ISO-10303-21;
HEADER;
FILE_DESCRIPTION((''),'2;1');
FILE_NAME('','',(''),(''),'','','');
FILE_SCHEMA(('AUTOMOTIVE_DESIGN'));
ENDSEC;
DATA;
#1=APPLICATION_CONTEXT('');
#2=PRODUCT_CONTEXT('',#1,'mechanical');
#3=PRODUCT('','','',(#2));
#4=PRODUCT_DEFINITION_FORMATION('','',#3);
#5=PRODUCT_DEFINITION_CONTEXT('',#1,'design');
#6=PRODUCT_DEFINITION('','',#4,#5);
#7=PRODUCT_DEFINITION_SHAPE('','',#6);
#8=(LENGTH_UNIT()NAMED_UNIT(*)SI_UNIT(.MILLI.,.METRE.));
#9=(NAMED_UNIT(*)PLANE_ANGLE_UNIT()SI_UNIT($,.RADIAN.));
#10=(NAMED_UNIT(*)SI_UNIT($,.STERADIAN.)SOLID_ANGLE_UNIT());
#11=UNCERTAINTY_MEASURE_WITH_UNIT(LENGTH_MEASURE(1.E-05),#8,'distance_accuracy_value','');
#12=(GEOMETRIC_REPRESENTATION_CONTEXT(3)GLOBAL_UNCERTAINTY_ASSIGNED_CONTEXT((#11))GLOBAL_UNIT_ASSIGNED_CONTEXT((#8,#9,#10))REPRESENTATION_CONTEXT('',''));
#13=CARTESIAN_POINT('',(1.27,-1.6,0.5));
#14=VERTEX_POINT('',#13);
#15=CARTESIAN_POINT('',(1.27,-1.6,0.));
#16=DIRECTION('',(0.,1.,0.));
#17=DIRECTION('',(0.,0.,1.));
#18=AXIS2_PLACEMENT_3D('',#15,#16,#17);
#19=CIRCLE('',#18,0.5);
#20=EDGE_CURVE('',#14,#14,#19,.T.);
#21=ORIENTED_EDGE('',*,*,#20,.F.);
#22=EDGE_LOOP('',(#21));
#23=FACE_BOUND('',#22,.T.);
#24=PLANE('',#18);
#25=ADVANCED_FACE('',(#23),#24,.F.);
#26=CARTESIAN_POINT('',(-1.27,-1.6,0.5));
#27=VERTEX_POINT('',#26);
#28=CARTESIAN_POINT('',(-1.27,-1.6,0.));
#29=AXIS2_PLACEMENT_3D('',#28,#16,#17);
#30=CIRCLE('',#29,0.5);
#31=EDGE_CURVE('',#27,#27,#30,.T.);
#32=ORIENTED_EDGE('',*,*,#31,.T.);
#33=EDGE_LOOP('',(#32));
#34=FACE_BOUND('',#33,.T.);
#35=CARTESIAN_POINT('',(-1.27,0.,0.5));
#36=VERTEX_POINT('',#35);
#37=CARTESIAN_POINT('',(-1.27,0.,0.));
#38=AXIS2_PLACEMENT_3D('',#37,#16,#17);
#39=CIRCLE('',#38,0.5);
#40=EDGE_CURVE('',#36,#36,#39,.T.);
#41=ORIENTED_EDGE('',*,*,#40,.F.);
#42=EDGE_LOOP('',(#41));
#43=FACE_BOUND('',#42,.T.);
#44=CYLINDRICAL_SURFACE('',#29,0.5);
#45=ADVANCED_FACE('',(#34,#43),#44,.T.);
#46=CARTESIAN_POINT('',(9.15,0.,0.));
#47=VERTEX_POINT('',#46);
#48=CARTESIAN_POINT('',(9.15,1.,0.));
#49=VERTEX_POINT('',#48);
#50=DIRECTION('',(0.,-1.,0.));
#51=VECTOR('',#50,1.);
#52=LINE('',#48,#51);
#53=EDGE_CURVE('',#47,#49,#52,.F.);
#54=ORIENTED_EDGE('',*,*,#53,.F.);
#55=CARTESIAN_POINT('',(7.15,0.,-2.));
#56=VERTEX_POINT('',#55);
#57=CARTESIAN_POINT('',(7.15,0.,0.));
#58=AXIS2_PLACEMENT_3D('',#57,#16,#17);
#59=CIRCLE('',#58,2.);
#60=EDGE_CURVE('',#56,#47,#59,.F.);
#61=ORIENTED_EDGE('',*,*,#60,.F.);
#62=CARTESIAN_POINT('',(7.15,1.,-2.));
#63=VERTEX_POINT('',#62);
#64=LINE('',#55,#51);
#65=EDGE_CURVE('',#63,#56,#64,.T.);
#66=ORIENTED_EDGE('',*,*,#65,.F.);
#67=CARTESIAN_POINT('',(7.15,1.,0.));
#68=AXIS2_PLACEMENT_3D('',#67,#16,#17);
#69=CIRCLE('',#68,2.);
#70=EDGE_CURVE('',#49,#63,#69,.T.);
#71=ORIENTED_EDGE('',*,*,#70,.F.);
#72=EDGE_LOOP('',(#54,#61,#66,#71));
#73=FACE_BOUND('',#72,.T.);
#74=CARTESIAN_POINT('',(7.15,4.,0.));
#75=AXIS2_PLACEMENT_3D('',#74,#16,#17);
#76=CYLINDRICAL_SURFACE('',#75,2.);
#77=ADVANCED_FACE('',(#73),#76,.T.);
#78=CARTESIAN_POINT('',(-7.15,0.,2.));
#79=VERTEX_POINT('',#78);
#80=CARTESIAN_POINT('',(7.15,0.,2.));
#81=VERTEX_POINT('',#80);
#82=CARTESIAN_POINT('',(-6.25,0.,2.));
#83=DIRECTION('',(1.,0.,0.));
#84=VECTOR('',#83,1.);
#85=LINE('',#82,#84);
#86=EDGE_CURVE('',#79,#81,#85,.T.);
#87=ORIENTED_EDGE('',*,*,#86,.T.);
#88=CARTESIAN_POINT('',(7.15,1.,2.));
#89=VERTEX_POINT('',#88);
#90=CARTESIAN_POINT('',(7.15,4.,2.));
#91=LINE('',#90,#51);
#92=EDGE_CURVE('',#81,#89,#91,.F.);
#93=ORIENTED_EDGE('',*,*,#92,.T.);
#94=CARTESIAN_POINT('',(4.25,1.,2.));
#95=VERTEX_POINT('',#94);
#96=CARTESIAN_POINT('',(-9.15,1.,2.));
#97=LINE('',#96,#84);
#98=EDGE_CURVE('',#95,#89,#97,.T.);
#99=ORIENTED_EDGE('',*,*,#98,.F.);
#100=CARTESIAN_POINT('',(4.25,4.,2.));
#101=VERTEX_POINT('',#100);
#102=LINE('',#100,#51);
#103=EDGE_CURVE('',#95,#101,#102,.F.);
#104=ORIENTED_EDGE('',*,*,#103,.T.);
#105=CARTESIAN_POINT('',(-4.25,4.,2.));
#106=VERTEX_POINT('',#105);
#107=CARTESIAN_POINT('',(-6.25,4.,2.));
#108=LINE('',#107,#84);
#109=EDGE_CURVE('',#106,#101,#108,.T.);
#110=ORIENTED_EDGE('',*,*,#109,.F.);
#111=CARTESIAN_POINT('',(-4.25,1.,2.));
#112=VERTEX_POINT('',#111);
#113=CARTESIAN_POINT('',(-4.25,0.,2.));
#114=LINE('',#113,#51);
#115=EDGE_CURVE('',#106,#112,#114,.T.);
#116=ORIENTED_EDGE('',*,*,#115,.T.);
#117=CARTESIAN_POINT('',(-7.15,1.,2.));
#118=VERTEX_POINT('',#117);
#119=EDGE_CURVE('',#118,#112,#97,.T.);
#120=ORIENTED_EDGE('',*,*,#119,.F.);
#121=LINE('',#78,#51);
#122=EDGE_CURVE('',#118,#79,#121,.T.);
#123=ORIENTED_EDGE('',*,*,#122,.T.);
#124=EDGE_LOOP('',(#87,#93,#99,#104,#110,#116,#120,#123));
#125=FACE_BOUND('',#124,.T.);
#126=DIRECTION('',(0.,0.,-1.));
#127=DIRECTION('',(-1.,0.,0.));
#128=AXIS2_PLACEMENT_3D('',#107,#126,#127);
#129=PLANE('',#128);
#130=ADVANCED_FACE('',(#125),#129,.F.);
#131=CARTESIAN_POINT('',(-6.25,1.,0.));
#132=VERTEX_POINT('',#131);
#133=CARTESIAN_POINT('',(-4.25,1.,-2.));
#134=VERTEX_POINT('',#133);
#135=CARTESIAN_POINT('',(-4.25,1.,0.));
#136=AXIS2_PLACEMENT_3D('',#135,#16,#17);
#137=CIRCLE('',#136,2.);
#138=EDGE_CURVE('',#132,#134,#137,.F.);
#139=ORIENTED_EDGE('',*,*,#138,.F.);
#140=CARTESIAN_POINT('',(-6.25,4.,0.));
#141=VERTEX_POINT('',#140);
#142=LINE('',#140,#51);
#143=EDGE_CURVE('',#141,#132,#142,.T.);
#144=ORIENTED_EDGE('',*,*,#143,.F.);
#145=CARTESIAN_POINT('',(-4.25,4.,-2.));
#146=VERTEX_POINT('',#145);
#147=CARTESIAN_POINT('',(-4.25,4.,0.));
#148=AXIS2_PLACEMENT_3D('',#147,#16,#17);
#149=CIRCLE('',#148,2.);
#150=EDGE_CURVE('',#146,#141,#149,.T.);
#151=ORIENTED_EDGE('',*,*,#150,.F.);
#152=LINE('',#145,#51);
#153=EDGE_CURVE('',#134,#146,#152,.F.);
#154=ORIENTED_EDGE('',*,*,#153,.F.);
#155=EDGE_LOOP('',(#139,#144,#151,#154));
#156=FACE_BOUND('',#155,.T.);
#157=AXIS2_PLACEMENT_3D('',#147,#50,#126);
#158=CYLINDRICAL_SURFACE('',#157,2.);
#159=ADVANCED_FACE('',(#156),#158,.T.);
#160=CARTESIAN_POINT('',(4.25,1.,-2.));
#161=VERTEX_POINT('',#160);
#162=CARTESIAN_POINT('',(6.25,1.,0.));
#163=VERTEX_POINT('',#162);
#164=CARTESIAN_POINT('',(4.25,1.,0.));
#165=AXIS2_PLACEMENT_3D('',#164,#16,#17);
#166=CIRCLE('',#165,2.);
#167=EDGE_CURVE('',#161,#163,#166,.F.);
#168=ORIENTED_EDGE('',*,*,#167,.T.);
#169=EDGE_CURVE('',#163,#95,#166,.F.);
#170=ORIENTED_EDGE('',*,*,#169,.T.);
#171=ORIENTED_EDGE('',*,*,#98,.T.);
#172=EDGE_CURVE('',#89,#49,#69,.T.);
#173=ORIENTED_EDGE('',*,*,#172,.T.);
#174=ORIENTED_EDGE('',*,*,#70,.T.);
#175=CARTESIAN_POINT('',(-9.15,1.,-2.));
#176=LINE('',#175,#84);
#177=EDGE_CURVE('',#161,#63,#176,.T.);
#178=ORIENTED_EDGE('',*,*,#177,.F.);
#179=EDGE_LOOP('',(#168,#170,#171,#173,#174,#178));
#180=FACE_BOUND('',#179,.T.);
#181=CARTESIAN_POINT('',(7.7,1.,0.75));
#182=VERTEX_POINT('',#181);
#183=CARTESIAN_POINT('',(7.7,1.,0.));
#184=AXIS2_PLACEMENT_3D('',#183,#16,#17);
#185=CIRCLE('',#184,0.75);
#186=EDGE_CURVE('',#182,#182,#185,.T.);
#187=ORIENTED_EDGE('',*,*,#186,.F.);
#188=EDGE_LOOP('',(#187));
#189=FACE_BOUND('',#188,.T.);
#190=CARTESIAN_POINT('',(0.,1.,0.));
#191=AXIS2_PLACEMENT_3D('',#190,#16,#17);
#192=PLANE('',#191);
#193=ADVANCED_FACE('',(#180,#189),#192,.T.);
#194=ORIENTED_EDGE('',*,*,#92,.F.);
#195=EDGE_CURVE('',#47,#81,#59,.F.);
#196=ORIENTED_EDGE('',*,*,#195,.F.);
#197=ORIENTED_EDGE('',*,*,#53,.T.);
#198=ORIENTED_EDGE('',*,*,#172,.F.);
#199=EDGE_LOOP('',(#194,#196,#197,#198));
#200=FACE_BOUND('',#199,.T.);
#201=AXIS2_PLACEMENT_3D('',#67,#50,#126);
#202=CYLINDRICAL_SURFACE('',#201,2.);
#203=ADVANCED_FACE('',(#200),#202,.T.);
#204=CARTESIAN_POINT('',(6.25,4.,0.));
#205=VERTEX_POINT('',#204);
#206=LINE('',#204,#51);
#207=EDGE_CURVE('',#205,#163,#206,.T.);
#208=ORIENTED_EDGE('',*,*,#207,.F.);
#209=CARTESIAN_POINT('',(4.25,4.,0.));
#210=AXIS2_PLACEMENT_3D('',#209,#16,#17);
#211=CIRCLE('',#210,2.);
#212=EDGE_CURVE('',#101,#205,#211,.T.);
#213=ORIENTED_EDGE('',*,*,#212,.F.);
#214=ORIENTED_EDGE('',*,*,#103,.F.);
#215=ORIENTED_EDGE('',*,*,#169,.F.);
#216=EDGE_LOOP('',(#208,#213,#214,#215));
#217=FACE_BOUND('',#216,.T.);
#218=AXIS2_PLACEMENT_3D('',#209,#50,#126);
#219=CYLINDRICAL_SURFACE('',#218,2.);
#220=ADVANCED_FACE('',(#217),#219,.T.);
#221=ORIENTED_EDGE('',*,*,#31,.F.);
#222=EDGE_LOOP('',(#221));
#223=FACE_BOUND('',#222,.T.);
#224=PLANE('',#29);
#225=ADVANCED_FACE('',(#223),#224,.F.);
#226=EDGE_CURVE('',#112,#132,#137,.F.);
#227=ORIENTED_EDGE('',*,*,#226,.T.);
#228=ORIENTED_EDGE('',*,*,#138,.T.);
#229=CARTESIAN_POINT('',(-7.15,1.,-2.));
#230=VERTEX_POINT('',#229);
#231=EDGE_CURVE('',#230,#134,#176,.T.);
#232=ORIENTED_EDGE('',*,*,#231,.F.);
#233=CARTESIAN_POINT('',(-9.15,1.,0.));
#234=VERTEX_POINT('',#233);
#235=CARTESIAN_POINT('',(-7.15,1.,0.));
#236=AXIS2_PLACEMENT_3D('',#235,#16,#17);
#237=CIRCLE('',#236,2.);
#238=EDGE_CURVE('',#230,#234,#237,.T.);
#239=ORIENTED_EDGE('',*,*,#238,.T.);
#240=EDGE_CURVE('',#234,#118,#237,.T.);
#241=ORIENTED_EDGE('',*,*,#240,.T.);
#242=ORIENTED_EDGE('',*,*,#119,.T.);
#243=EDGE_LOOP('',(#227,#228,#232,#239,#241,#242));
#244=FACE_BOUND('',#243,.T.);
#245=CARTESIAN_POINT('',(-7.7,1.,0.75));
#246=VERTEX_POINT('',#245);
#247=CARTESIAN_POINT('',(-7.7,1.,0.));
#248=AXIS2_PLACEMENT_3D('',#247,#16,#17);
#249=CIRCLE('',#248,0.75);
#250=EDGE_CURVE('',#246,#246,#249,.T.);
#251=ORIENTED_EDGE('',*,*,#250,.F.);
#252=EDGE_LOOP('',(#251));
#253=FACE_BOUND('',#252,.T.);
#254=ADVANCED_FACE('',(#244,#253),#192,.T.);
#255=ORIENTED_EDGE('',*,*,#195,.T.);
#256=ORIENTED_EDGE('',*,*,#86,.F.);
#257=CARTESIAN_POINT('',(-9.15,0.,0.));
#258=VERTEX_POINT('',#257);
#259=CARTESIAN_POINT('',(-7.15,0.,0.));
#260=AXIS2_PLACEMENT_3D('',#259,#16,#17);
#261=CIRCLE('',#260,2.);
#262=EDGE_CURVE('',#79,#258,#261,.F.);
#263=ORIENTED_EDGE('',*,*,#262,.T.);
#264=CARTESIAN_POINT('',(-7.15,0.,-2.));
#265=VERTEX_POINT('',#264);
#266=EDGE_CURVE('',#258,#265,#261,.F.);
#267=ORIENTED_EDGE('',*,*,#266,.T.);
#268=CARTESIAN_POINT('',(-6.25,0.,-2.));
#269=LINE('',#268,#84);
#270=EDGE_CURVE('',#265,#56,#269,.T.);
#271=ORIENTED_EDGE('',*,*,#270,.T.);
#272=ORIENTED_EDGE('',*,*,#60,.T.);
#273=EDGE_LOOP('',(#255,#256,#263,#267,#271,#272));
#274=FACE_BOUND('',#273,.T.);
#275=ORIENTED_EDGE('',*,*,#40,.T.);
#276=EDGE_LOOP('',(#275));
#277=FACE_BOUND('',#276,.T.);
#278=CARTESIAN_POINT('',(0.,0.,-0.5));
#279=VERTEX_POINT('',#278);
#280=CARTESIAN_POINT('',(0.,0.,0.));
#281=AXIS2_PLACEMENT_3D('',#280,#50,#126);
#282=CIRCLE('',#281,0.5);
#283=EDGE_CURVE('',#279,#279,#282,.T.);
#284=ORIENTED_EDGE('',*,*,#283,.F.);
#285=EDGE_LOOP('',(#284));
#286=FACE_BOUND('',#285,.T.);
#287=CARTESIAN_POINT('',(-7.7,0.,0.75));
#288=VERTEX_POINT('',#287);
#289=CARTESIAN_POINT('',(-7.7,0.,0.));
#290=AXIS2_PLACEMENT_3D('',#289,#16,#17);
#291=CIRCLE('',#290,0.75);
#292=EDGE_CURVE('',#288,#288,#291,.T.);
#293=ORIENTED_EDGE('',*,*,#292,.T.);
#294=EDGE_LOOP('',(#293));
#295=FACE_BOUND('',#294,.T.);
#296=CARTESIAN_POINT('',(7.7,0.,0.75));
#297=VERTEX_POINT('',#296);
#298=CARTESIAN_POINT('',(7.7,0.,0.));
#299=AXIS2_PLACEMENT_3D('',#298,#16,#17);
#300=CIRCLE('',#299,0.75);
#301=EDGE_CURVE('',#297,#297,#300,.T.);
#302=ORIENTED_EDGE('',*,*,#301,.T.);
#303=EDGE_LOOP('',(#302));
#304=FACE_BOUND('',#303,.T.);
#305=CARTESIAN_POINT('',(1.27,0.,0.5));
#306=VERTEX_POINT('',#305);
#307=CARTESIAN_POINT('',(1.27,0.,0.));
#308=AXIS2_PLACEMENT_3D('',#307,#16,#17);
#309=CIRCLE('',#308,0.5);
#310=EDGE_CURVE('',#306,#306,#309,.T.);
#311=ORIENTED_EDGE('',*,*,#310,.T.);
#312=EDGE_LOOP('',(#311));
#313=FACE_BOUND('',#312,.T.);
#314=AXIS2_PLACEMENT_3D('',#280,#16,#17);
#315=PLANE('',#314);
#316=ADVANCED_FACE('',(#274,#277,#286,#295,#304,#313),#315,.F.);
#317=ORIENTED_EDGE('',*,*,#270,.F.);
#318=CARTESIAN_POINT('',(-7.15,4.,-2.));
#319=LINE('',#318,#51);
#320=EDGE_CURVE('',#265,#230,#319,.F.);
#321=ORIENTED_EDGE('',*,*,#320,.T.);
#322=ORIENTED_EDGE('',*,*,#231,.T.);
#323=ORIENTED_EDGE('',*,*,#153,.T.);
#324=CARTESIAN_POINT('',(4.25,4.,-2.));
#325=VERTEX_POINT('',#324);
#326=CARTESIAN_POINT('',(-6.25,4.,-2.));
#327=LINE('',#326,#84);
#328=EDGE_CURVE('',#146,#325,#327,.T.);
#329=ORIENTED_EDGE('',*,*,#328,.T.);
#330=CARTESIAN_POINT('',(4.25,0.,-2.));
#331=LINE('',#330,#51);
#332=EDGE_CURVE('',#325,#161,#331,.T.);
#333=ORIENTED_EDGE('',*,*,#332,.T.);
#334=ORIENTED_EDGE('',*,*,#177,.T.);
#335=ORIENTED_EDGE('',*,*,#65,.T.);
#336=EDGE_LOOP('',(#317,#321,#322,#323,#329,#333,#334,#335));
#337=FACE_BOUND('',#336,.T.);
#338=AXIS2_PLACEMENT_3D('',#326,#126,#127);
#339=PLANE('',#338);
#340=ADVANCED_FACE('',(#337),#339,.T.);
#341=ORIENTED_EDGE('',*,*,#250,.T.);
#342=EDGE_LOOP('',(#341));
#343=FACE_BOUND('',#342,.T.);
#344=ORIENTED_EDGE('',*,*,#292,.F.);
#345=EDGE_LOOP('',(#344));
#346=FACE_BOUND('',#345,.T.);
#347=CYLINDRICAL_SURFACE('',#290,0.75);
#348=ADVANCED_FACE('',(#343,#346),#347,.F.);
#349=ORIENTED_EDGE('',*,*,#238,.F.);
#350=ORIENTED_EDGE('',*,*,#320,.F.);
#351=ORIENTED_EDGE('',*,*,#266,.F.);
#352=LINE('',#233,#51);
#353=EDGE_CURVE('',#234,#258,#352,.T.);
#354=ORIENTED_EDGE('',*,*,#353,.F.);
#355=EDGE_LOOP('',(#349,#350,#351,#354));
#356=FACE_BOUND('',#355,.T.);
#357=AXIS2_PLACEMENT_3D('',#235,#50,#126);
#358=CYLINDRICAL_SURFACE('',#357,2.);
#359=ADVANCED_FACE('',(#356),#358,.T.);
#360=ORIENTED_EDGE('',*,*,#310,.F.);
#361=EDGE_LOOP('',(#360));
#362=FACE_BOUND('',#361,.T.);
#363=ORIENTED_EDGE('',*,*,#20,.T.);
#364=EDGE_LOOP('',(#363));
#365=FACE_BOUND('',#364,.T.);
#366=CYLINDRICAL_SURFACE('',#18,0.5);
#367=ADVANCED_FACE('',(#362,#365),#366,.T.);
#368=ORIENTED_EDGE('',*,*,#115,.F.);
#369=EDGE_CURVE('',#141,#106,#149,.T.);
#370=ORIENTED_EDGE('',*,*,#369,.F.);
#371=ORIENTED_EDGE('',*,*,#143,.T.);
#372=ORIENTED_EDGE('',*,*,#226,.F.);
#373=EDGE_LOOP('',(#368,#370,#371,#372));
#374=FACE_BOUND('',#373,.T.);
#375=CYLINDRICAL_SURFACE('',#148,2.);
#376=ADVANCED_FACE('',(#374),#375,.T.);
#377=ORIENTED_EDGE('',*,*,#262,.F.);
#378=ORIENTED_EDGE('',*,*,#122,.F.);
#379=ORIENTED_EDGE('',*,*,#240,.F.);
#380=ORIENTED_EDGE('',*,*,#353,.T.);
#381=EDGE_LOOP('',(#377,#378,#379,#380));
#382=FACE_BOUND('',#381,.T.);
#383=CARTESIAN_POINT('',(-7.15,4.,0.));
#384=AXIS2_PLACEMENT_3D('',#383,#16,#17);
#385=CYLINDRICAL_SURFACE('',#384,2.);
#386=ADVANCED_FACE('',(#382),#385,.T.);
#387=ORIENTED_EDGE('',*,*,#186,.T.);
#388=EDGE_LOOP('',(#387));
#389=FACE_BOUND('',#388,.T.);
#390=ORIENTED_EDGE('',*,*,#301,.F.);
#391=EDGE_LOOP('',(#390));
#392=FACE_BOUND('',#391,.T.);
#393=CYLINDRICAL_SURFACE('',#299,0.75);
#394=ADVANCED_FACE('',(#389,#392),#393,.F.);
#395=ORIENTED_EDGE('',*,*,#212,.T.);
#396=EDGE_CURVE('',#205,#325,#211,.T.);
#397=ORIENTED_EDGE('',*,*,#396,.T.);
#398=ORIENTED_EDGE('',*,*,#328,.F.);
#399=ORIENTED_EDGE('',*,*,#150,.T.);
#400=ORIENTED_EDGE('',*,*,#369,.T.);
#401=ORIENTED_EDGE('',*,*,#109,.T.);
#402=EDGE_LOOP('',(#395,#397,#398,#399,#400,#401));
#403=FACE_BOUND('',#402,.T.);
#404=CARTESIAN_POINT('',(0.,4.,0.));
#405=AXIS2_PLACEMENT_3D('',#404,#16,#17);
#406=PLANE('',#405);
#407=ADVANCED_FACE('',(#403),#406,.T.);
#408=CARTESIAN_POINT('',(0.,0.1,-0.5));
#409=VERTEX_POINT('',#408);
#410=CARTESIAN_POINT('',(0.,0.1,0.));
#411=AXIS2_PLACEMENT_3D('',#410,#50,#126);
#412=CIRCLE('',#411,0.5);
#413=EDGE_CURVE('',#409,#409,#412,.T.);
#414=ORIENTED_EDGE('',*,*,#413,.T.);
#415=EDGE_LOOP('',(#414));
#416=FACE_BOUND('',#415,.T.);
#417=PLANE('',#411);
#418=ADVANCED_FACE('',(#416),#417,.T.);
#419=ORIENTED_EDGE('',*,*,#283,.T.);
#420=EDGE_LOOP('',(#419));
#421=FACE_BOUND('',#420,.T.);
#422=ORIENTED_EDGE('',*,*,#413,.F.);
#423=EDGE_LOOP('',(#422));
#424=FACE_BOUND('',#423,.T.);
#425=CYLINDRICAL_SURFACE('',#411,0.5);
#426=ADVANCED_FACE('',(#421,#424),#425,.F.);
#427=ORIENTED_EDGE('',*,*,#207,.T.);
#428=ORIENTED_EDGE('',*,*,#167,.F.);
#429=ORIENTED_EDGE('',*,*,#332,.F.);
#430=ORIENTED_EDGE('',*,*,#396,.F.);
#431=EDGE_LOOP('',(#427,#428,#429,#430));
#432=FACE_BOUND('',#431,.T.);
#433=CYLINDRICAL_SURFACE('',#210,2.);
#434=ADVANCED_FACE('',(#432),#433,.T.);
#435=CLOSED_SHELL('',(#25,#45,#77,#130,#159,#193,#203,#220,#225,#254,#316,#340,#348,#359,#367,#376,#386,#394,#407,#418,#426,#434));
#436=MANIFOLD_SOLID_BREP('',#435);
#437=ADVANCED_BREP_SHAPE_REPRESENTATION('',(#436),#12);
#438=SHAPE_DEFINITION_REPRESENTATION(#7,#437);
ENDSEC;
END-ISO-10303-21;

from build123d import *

# Parameters (mm, degrees)
SKETCH_1_W          = 12.5
SKETCH_1_H          = 4
EXTRUDE_1_DEPTH     = 4
FILLET_1_R          = 2
SKETCH_1_3_W        = 18.3
SKETCH_1_3_H        = 4
EXTRUDE_2_DEPTH     = 1
FILLET_2_R          = 2
SKETCH_2_R          = 0.75
CUT_EXTRUDE_1_DEPTH = 10.834759784
EXTRUDE_START       = -4
SKETCH_3_R          = 0.5
EXTRUDE_3_DEPTH     = 5.6
SKETCH_4_R          = 0.5
CUT_EXTRUDE_2_DEPTH = 0.1


with BuildPart() as part:
    # 草图1 → 凸台-拉伸1 (new body)
    with BuildSketch(Plane(origin=(0, 0, 0), x_dir=(1, 0, 0), z_dir=(0, 1, 0))):
        Rectangle(SKETCH_1_W, SKETCH_1_H)
    extrude(amount=EXTRUDE_1_DEPTH)

    # 圆角1
    fillet_1_edges = [part.edges().sort_by_distance(p)[0] for p in [
        (6.25, 2, -2),
        (6.25, 2, 2),
        (-6.25, 2, 2),
        (-6.25, 2, -2),
    ]]
    fillet(fillet_1_edges, radius=FILLET_1_R - 0.0001)  # a hair under: the kernel refuses the full size

    # 草图1<3> → 凸台-拉伸2 (add)
    with BuildSketch(Plane(origin=(0, 0, 0), x_dir=(1, 0, 0), z_dir=(0, 1, 0))):
        Rectangle(SKETCH_1_3_W, SKETCH_1_3_H)
    extrude(amount=EXTRUDE_2_DEPTH)

    # 圆角2
    fillet_2_edges = [part.edges().sort_by_distance(p)[0] for p in [
        (9.15, 0.5, 2),
        (9.15, 0.5, -2),
        (-9.15, 0.5, 2),
        (-9.15, 0.5, -2),
    ]]
    fillet(fillet_2_edges, radius=FILLET_2_R - 0.0001)  # a hair under: the kernel refuses the full size

    # 草图2 → 切除-拉伸1 (cut, through all)
    with BuildSketch(Plane(origin=(0, 1, 0), x_dir=(1, 0, 0), z_dir=(0, 1, 0))):
        with Locations(Location((-7.7, 0, 0), (0, 0, 270))):
            Circle(SKETCH_2_R)
        with Locations(Location((7.7, 0, 0), (0, 0, 270))):
            Circle(SKETCH_2_R)
    extrude(amount=-CUT_EXTRUDE_1_DEPTH, mode=Mode.SUBTRACT)

    # 草图3 → 凸台-拉伸3 (add)
    with BuildSketch(Plane.XZ.offset(EXTRUDE_START)):
        with Locations(Location((-1.27, 0, 0), (0, 0, 90))):
            Circle(SKETCH_3_R)
        with Locations(Location((1.27, 0, 0), (0, 0, 90))):
            Circle(SKETCH_3_R)
    extrude(amount=EXTRUDE_3_DEPTH)

    # 草图4 → 切除-拉伸2 (cut)
    with BuildSketch(Plane.XZ):
        with Locations(Location((0, 0, 0), (0, 0, 270))):
            Circle(SKETCH_4_R)
    extrude(amount=-CUT_EXTRUDE_2_DEPTH, mode=Mode.SUBTRACT)


solid = part.part
